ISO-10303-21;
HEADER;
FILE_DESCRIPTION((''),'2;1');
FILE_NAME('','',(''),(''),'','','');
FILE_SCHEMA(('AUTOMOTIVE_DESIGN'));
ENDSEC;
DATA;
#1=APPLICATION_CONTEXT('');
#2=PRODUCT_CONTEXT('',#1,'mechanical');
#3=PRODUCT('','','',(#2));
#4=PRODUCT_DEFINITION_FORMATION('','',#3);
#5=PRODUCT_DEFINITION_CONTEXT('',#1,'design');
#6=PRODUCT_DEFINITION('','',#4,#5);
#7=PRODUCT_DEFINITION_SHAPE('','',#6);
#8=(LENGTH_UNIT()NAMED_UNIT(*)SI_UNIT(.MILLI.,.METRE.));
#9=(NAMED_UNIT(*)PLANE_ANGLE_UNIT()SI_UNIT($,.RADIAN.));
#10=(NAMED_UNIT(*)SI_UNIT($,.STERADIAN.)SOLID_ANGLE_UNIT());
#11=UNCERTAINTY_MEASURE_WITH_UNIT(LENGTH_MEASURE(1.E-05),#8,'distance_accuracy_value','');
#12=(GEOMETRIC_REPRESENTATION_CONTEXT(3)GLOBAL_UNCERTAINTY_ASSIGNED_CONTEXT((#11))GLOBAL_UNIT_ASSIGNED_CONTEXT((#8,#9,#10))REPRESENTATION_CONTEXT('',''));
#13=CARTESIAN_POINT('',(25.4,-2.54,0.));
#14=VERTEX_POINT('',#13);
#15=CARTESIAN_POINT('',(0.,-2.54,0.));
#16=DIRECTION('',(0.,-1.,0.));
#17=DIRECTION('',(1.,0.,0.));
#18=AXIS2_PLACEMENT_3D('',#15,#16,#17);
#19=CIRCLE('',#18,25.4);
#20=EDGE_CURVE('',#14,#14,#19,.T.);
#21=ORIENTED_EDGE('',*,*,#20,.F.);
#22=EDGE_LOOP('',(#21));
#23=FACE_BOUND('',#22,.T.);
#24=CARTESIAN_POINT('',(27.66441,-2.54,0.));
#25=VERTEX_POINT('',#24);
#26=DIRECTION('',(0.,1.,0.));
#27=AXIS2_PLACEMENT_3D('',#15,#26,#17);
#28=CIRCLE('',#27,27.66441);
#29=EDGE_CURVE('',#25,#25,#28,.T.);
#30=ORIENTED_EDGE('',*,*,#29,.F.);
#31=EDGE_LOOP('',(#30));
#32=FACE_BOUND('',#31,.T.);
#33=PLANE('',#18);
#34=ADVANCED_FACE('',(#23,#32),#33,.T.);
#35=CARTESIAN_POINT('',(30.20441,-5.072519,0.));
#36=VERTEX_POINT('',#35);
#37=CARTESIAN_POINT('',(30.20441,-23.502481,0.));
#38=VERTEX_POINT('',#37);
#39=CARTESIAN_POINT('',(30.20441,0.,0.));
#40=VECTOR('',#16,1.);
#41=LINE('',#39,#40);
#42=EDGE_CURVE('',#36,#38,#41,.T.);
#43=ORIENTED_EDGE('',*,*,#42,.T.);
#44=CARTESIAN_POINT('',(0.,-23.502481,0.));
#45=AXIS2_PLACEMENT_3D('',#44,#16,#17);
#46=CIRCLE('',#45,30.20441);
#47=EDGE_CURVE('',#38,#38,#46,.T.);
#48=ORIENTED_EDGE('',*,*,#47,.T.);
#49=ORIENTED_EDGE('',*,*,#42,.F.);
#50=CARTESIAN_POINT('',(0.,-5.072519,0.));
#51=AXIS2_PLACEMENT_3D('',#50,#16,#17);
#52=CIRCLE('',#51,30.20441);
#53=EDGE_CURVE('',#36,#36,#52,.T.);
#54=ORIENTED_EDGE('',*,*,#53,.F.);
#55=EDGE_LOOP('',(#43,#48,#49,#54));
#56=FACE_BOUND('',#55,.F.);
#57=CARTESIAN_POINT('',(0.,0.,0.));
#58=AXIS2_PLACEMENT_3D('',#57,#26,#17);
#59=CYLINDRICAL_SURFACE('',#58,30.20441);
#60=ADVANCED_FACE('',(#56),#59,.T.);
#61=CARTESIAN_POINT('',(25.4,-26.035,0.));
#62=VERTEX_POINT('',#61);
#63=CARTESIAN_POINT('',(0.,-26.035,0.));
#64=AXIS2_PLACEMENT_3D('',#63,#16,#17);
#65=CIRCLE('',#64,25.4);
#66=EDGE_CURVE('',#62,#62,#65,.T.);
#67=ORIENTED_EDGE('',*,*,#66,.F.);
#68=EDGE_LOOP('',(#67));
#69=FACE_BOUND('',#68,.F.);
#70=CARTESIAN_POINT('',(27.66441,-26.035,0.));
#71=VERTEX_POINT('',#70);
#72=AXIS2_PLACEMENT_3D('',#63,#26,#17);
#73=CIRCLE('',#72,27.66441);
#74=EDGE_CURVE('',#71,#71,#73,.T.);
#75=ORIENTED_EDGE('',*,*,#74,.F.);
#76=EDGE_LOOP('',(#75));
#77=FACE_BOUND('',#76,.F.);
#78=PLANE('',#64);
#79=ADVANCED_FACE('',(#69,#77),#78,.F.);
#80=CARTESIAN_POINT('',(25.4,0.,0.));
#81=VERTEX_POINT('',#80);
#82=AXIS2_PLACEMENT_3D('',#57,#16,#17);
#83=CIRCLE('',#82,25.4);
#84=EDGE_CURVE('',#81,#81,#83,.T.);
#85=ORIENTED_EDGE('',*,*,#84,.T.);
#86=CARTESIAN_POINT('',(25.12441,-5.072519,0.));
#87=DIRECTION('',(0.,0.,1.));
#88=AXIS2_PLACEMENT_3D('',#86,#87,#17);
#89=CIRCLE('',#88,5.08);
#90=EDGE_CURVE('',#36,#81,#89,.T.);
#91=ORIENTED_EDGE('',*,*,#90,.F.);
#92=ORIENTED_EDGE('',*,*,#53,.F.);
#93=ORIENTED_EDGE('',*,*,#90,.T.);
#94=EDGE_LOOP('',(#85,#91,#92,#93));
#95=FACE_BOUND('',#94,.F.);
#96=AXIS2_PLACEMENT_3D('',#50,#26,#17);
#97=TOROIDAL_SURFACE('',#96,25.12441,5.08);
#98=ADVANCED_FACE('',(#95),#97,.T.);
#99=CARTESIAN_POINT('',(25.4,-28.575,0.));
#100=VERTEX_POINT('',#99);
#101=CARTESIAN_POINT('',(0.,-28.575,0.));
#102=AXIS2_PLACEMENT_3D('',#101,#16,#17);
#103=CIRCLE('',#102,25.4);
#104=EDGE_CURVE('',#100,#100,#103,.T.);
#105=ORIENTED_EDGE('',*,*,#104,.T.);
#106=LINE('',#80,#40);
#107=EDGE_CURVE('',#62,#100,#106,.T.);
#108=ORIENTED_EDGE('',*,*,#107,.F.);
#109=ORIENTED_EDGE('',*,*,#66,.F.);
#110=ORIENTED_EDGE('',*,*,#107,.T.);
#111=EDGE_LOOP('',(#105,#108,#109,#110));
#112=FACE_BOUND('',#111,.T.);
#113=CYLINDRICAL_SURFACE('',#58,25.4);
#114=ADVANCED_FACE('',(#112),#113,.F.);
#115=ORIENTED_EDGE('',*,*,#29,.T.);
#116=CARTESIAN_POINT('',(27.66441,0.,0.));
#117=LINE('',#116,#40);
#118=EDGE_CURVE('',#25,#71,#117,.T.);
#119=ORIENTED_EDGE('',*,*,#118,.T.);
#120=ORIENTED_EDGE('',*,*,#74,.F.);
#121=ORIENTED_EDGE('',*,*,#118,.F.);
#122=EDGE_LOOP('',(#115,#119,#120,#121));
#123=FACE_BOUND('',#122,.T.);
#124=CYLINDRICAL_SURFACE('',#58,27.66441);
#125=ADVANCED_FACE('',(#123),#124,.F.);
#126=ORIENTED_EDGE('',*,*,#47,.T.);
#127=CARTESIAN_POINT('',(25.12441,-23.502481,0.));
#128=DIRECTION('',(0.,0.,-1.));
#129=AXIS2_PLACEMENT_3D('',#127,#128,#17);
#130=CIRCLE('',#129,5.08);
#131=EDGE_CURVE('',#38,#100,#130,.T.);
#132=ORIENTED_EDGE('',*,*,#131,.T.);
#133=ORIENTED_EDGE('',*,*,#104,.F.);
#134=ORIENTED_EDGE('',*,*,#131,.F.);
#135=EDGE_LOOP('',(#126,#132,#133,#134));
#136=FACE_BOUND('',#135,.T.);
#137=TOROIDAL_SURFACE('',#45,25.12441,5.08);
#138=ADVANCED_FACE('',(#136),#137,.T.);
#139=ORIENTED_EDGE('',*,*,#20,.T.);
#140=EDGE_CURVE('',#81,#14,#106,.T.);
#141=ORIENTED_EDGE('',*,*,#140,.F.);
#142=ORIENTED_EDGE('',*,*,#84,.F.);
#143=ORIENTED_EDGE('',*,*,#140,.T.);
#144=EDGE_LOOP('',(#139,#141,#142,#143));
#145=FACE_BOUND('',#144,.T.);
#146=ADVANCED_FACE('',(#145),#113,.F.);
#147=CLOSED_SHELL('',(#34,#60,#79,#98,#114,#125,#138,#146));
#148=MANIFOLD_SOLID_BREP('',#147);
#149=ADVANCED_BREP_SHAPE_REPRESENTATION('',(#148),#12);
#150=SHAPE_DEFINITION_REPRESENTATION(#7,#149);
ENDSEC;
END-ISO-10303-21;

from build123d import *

# Parameters (mm, degrees)
F0_R     = 30.20441
F0_R_2   = 25.4
F2_DEPTH = 28.575
F3_T     = -2.54


# Not quite as in the source:
# - a fillet or chamfer that OpenCascade refuses, or shapes differently, is made with other operations: its cross-section is extruded or revolved along the edge and cut away or added


with BuildPart() as f2:
    # F0 (on Front) → F2 (new body)
    with BuildSketch(Plane.XZ):
        Circle(F0_R)
        Circle(F0_R_2, mode=Mode.SUBTRACT)
    extrude(amount=F2_DEPTH)

    # F3
    f3_openings = [f2.faces().sort_by_distance(p)[0] for p in [
        (-25.4, -14.2875, 0),
    ]]
    offset(amount=F3_T, openings=f3_openings)

    # F4: fillet of radius 5.08 on 2 edges, made by hand

    # F4_s1 → F4_t2 (revolve, cut)
    with BuildSketch(Plane.XY):
        with BuildLine():
            ThreePointArc((30.20441, -5.072519113), (28.8126614285, -1.5792110247), (25.4, 0))
            Line((25.4, 0), (30.20441, 0))
            Line((30.20441, 0), (30.20441, -5.072519113))
        make_face()
    revolve(axis=Axis((0, 0, 0), (0, -1, 0)), mode=Mode.SUBTRACT)

    # F4_s3 → F4_t4 (revolve, cut)
    with BuildSketch(Plane.XY):
        with BuildLine():
            ThreePointArc((30.20441, -23.502480887), (28.8126614285, -26.9957889753), (25.4, -28.575))
            Line((25.4, -28.575), (30.20441, -28.575))
            Line((30.20441, -28.575), (30.20441, -23.502480887))
        make_face()
    revolve(axis=Axis((0, -28.575, 0), (0, -1, 0)), mode=Mode.SUBTRACT)


solid = f2.part
